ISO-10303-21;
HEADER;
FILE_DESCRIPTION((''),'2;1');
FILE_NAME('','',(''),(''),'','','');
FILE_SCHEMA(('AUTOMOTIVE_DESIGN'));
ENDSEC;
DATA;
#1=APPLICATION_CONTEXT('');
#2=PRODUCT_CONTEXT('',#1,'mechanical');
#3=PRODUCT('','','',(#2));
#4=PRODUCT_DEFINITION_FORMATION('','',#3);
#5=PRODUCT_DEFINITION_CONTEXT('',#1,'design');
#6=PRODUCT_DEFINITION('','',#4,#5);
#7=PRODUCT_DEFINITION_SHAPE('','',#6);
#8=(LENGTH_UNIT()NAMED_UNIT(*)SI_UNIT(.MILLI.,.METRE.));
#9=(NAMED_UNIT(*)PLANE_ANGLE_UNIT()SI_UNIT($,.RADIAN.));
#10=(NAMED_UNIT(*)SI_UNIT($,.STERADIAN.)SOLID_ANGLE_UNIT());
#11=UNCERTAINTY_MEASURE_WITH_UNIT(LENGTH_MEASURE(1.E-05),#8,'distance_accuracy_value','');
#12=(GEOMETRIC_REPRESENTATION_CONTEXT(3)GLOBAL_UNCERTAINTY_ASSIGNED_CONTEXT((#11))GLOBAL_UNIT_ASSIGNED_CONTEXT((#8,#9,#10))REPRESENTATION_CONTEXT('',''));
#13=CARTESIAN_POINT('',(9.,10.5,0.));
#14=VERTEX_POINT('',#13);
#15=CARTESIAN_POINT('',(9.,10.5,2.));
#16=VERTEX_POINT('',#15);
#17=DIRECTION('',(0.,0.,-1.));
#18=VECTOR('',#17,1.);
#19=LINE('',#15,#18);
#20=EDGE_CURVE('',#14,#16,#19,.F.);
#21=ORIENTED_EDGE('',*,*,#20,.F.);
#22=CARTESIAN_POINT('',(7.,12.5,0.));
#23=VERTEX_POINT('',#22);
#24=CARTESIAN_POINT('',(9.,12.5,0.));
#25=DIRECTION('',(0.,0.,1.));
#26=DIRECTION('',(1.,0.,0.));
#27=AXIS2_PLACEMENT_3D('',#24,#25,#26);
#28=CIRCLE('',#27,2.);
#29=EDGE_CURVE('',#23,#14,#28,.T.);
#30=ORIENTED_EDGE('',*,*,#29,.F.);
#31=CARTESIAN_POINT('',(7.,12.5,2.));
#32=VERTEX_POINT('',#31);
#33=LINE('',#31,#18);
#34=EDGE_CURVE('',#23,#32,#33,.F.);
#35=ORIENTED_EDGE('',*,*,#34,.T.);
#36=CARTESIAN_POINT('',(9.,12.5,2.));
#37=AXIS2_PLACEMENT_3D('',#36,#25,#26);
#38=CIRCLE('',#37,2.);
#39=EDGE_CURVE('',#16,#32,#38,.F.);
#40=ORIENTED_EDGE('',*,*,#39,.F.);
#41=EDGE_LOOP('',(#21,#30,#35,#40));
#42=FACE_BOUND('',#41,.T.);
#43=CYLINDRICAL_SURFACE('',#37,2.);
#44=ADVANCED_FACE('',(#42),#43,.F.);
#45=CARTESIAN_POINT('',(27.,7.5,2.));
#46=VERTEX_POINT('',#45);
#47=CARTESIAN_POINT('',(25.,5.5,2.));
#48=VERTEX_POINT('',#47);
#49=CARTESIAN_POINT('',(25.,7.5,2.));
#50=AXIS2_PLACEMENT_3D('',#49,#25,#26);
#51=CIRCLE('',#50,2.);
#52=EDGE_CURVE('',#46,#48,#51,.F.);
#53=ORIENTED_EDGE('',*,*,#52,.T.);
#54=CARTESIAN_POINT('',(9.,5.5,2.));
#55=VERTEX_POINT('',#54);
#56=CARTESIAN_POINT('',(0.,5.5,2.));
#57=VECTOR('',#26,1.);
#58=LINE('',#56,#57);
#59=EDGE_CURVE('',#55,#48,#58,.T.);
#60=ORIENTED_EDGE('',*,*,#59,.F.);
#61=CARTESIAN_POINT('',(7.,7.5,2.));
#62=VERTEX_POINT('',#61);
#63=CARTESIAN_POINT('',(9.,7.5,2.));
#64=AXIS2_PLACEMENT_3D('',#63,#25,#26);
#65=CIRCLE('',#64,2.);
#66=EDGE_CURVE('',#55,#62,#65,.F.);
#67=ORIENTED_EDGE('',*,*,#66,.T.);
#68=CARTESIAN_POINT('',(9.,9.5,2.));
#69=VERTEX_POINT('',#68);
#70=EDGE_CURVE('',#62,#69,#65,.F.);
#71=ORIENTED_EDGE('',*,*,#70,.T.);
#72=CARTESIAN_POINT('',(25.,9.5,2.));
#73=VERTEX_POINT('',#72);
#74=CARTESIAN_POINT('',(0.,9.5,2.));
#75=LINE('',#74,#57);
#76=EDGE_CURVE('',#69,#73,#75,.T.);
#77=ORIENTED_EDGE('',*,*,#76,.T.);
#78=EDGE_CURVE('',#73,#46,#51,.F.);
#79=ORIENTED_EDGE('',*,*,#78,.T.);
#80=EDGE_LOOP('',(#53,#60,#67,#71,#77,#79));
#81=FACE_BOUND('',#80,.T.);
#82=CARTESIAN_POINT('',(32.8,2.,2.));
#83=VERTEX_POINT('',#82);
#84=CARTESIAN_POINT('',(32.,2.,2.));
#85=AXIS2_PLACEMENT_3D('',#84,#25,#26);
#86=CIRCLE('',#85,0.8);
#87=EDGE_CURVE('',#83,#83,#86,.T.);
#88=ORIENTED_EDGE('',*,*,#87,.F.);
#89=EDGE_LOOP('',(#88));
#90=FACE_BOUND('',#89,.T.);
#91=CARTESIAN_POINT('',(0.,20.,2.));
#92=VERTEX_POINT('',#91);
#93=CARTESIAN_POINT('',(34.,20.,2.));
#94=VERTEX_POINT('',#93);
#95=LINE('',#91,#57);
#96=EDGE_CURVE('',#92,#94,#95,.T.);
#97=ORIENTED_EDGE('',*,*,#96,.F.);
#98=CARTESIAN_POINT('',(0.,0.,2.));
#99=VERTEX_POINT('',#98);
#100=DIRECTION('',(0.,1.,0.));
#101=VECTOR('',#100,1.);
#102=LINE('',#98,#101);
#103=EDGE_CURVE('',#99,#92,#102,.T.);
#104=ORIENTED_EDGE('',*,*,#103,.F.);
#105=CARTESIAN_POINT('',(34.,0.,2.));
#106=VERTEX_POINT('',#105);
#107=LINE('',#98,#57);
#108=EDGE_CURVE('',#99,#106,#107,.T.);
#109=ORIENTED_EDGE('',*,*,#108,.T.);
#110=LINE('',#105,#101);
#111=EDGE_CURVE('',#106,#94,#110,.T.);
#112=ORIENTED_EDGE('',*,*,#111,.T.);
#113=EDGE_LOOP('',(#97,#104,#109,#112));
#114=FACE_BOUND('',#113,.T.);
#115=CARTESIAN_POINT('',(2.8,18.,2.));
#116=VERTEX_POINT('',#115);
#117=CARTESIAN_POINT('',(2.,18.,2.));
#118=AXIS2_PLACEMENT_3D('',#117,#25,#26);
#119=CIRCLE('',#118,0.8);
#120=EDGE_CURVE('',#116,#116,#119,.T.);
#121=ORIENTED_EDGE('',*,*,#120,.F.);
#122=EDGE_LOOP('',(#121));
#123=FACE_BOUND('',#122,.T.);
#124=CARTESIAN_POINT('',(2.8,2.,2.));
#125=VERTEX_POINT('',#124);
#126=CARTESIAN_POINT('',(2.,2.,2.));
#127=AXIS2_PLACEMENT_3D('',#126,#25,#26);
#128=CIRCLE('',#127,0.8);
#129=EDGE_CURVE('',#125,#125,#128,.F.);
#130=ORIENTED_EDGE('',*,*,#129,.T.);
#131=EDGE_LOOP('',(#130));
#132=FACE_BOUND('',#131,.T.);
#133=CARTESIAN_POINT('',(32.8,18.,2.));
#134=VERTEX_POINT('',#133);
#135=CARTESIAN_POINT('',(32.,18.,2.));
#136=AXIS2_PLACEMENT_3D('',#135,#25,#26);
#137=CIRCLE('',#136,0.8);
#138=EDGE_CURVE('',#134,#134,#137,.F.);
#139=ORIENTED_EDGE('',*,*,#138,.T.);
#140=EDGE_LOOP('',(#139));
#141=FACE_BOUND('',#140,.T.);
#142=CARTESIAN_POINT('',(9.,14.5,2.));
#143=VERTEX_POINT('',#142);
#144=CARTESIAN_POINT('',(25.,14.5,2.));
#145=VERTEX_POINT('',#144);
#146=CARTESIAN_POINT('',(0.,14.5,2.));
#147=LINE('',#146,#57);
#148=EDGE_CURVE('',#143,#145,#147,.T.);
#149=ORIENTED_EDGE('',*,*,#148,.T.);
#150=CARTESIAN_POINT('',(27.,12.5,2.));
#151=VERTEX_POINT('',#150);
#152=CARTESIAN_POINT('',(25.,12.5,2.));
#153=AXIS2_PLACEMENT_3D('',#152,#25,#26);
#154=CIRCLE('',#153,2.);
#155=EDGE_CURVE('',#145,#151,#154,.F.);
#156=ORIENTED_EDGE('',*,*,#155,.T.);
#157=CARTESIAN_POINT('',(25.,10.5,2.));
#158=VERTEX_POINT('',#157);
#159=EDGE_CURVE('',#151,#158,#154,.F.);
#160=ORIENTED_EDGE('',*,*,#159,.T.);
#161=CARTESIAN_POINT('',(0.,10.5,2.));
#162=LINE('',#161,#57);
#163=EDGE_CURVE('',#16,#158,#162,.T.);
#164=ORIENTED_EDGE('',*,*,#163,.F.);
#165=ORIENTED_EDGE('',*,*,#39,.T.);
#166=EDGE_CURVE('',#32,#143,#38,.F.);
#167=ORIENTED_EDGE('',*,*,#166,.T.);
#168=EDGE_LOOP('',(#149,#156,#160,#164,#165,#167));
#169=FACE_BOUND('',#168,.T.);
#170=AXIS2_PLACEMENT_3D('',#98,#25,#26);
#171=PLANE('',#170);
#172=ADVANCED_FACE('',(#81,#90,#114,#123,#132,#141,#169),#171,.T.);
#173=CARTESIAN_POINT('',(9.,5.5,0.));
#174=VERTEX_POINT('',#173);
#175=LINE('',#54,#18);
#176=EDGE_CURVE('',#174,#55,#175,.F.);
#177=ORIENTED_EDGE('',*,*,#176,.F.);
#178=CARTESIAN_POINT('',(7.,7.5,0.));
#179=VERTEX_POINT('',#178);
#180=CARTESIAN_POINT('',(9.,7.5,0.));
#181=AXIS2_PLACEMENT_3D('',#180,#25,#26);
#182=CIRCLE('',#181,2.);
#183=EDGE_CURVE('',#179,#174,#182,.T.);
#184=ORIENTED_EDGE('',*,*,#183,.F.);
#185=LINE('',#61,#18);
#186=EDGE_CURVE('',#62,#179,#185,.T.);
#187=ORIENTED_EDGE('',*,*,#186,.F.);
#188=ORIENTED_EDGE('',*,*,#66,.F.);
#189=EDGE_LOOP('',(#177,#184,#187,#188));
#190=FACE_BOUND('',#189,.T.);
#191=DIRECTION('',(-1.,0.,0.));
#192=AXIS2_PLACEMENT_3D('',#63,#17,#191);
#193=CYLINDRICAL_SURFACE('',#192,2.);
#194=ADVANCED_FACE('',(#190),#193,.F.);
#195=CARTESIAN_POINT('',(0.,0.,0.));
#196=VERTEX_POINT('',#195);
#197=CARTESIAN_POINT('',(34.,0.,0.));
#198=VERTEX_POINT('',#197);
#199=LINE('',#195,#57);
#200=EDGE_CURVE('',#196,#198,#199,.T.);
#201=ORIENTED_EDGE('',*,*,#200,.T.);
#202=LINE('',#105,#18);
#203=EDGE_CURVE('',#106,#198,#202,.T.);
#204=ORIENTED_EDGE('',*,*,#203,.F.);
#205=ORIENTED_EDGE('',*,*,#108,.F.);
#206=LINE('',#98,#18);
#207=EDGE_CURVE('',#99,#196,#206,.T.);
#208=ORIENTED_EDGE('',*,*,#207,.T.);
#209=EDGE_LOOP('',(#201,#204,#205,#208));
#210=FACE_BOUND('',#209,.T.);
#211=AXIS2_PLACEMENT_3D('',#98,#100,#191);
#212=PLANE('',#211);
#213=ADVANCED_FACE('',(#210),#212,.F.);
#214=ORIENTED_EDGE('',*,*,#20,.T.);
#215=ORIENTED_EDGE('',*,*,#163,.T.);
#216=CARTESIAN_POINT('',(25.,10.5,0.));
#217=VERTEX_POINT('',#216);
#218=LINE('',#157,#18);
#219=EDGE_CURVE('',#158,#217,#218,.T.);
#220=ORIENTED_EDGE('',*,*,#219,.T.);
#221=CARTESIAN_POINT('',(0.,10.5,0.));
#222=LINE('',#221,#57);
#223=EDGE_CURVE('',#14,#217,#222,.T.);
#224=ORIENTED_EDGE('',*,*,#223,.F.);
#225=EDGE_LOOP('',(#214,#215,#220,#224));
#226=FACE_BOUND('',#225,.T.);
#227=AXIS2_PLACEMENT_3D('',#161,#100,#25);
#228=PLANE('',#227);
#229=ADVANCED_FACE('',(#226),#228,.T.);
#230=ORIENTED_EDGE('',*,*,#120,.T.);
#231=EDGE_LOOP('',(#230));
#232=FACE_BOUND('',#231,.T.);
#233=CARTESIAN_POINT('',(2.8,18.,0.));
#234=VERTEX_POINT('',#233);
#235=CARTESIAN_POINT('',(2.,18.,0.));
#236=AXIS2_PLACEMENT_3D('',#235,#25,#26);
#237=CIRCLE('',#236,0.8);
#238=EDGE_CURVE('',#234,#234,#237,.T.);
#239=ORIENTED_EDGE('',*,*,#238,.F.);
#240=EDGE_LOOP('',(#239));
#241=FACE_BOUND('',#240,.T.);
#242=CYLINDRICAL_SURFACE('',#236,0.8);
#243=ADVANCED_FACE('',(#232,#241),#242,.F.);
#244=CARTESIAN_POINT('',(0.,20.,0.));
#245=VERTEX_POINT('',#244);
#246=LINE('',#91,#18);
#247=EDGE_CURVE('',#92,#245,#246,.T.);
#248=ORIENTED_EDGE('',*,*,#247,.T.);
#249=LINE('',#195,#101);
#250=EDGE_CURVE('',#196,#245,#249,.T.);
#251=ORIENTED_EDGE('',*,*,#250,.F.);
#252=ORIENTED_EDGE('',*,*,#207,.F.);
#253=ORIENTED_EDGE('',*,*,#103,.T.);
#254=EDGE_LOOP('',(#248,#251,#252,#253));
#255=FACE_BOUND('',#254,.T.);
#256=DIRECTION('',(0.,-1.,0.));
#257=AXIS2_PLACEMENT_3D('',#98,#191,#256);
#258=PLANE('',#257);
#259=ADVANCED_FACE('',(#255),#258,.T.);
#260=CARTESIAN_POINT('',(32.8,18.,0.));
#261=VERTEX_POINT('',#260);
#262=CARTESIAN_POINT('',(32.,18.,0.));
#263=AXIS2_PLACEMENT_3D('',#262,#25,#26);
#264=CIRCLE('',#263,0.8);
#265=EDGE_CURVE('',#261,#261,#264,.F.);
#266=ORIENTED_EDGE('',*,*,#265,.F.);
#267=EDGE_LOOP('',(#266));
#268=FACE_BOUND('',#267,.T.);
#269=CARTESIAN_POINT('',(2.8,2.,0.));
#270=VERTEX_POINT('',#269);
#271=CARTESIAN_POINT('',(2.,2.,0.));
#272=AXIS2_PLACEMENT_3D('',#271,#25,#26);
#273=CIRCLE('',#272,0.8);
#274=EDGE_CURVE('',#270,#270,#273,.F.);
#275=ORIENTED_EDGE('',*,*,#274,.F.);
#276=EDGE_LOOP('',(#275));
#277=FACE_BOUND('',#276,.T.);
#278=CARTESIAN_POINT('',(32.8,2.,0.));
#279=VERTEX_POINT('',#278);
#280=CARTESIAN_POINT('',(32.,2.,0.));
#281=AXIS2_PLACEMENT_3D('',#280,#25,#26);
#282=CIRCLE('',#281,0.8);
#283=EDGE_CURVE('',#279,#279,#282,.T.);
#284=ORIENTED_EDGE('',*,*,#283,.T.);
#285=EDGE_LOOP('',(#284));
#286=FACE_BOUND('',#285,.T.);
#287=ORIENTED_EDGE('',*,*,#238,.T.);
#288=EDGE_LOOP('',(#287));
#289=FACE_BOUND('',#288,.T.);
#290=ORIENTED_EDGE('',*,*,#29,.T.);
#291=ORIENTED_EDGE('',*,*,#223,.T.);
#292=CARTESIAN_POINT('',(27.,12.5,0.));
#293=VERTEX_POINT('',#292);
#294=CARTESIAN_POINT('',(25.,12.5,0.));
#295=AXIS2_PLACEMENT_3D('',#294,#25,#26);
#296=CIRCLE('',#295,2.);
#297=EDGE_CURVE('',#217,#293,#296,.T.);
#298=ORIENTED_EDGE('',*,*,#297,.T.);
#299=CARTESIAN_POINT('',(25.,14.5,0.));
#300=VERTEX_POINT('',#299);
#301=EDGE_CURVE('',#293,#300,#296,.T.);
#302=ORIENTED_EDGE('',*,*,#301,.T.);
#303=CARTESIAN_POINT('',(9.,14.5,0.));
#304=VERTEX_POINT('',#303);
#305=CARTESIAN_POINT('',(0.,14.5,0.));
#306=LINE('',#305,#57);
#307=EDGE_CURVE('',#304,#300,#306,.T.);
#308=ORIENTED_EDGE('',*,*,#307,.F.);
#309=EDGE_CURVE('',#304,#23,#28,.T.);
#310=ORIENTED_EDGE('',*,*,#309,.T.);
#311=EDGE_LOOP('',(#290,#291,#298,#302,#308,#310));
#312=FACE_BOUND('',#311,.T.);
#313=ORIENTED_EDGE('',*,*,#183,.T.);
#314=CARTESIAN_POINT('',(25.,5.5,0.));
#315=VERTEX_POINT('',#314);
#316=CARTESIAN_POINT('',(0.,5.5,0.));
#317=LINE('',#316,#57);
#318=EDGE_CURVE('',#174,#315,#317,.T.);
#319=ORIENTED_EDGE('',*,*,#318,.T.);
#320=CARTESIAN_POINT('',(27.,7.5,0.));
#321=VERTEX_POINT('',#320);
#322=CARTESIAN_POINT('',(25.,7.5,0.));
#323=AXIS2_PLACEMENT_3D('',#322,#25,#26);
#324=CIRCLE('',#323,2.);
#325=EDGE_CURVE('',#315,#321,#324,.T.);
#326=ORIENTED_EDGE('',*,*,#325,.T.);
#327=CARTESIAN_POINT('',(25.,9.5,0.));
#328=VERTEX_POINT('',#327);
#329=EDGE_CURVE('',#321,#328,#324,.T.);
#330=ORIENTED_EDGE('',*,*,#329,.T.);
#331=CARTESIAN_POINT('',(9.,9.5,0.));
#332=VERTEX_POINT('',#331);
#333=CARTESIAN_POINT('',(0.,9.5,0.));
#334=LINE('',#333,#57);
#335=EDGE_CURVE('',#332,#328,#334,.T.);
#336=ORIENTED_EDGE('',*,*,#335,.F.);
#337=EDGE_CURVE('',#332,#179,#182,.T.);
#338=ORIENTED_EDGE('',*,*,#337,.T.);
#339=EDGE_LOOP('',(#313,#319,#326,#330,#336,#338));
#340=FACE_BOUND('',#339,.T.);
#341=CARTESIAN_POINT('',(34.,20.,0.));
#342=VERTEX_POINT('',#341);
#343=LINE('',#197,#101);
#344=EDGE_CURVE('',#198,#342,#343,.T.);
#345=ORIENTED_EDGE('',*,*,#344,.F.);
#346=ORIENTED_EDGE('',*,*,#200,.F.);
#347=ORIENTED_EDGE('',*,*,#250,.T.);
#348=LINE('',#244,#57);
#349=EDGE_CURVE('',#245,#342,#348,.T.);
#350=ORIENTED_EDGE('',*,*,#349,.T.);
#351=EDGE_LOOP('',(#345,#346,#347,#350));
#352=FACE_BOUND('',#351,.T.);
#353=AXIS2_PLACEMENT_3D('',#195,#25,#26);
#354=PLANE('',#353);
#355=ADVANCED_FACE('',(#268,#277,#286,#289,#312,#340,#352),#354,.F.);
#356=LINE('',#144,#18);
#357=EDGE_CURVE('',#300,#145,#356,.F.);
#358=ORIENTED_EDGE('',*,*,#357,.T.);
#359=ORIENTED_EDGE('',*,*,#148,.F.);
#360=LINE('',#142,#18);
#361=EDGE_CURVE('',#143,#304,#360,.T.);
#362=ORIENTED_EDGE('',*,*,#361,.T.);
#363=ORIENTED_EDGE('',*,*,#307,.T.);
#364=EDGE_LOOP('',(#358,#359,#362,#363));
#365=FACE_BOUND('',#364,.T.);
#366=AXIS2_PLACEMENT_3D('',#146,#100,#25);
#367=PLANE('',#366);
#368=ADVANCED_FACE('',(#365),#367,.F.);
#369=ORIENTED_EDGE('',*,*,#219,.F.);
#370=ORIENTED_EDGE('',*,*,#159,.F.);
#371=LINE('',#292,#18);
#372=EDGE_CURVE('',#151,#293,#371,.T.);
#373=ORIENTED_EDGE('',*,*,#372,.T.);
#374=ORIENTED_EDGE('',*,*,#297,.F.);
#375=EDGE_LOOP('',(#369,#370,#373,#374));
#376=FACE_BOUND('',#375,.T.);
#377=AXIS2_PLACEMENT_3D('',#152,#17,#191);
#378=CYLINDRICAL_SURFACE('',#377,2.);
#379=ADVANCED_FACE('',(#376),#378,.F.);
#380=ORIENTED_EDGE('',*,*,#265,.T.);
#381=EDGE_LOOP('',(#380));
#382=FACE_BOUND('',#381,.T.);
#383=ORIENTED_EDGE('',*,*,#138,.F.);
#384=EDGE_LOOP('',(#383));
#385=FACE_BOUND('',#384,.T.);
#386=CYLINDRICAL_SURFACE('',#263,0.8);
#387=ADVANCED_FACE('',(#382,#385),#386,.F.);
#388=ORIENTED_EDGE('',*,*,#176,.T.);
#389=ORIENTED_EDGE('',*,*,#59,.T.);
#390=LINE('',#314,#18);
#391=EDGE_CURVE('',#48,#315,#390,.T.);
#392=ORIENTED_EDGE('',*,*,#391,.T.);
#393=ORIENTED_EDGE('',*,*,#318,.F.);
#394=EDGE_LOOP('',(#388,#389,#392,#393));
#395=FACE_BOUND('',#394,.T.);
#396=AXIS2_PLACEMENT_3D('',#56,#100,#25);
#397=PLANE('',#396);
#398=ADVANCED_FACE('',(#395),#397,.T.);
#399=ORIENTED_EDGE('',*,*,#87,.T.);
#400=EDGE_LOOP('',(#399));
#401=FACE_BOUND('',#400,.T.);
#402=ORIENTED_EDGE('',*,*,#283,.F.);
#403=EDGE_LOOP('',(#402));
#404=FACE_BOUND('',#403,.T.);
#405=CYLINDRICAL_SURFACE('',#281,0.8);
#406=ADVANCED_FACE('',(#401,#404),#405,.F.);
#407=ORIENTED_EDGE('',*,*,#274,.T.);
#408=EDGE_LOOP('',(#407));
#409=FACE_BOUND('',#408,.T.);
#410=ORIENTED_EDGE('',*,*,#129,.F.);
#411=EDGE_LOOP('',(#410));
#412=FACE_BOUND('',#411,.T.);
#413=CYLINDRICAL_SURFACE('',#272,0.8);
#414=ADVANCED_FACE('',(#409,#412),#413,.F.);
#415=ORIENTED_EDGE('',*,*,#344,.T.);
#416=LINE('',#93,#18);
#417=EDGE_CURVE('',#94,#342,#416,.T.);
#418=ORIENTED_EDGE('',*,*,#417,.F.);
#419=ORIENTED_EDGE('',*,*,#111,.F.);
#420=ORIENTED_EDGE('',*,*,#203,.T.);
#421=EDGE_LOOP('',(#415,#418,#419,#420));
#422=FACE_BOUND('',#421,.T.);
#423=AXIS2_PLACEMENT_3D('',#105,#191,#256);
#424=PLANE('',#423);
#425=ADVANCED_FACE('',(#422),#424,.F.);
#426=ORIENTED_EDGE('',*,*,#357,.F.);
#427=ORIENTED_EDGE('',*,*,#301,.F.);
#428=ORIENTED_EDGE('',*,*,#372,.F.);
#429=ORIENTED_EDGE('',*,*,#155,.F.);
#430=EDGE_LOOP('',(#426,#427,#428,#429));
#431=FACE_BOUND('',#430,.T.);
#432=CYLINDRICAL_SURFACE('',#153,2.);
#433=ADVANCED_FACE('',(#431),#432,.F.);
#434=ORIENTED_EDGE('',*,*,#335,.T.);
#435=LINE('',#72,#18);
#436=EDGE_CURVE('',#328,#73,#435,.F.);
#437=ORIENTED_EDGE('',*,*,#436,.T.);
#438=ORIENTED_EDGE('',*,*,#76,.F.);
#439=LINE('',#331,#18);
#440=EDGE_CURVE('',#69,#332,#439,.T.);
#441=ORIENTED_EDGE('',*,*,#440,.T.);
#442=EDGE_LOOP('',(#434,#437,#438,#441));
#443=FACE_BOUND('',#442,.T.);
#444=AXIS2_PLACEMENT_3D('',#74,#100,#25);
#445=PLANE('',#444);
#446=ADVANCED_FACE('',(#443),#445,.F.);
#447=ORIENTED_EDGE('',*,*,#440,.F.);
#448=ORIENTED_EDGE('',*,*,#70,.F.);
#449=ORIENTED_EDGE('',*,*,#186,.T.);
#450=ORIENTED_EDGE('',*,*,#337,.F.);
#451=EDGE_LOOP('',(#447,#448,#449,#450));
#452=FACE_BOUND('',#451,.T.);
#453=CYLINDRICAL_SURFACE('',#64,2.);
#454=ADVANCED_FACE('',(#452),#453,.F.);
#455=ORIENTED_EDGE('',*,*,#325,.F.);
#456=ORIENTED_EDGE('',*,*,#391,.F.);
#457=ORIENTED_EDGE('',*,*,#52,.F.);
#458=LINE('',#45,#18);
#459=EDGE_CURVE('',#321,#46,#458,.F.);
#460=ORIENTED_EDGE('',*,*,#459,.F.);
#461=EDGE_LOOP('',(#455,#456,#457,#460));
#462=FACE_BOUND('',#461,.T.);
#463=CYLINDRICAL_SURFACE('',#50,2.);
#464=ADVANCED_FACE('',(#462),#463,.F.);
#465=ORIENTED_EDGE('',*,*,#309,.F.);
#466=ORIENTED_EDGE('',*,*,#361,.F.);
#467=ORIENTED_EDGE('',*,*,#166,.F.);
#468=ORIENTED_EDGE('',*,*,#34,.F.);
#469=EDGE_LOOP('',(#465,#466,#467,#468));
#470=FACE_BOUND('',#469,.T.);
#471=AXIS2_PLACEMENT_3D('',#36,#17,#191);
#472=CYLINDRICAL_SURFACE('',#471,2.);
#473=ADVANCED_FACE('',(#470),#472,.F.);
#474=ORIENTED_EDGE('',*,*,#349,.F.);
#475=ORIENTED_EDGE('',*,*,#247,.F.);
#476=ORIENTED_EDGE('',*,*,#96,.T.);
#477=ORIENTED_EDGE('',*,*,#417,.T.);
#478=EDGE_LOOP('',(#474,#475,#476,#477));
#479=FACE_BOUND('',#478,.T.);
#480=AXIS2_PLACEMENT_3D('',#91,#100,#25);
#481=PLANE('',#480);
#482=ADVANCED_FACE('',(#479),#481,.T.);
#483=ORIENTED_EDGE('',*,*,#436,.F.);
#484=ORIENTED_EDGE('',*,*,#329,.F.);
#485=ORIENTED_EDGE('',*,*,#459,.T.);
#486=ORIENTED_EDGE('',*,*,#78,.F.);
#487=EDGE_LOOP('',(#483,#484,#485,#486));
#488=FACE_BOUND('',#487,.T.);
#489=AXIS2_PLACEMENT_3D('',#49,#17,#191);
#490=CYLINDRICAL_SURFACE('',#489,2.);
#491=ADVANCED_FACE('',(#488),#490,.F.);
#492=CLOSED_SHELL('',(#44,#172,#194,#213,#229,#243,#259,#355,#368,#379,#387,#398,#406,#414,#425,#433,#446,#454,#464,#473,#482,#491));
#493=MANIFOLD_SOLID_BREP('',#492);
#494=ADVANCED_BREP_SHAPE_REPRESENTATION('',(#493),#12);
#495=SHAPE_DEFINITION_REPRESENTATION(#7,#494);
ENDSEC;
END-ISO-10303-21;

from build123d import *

# Parameters (mm, degrees)
BOSS_EXTRUDE2_DEPTH = 2
SKETCH2_R           = 0.8
CUT_EXTRUDE1_DEPTH  = 2
FILLET1_R           = 2


with BuildPart() as part:
    # Sketch1 → Boss-Extrude2 (new body)
    with BuildSketch(Plane.XY):
        Polygon((17, 10.5), (17, 10), (34, 10), (34, 20), (17, 20), (17, 14.5), (27, 14.5), (27, 10.5), align=None)
        Polygon((34, 10), (17, 10), (17, 9.5), (27, 9.5), (27, 5.5), (17, 5.5), (17, 0), (34, 0), align=None)
        Polygon((17, 10), (0, 10), (0, 0), (17, 0), (17, 5.5), (7, 5.5), (7, 9.5), (17, 9.5), align=None)
        Polygon((0, 20), (0, 10), (17, 10), (17, 10.5), (7, 10.5), (7, 14.5), (17, 14.5), (17, 20), align=None)
    extrude(amount=BOSS_EXTRUDE2_DEPTH)

    # Sketch2 → Cut-Extrude1 (cut)
    with BuildSketch(Plane.XY.offset(2)):
        with Locations((2, 2)):
            Circle(SKETCH2_R)
        with Locations((2, 18)):
            Circle(SKETCH2_R)
        with Locations((32, 18)):
            Circle(SKETCH2_R)
        with Locations((32, 2)):
            Circle(SKETCH2_R)
    extrude(amount=-CUT_EXTRUDE1_DEPTH, mode=Mode.SUBTRACT)

    # Fillet1
    fillet1_edges = [part.edges().sort_by_distance(p)[0] for p in [
        (7, 9.5, 1),
        (7, 5.5, 1),
        (27, 9.5, 1),
        (27, 5.5, 1),
        (27, 10.5, 1),
        (27, 14.5, 1),
        (7, 10.5, 1),
        (7, 14.5, 1),
    ]]
    fillet(fillet1_edges, radius=FILLET1_R - 0.0001)  # a hair under: the kernel refuses the full size


solid = part.part
